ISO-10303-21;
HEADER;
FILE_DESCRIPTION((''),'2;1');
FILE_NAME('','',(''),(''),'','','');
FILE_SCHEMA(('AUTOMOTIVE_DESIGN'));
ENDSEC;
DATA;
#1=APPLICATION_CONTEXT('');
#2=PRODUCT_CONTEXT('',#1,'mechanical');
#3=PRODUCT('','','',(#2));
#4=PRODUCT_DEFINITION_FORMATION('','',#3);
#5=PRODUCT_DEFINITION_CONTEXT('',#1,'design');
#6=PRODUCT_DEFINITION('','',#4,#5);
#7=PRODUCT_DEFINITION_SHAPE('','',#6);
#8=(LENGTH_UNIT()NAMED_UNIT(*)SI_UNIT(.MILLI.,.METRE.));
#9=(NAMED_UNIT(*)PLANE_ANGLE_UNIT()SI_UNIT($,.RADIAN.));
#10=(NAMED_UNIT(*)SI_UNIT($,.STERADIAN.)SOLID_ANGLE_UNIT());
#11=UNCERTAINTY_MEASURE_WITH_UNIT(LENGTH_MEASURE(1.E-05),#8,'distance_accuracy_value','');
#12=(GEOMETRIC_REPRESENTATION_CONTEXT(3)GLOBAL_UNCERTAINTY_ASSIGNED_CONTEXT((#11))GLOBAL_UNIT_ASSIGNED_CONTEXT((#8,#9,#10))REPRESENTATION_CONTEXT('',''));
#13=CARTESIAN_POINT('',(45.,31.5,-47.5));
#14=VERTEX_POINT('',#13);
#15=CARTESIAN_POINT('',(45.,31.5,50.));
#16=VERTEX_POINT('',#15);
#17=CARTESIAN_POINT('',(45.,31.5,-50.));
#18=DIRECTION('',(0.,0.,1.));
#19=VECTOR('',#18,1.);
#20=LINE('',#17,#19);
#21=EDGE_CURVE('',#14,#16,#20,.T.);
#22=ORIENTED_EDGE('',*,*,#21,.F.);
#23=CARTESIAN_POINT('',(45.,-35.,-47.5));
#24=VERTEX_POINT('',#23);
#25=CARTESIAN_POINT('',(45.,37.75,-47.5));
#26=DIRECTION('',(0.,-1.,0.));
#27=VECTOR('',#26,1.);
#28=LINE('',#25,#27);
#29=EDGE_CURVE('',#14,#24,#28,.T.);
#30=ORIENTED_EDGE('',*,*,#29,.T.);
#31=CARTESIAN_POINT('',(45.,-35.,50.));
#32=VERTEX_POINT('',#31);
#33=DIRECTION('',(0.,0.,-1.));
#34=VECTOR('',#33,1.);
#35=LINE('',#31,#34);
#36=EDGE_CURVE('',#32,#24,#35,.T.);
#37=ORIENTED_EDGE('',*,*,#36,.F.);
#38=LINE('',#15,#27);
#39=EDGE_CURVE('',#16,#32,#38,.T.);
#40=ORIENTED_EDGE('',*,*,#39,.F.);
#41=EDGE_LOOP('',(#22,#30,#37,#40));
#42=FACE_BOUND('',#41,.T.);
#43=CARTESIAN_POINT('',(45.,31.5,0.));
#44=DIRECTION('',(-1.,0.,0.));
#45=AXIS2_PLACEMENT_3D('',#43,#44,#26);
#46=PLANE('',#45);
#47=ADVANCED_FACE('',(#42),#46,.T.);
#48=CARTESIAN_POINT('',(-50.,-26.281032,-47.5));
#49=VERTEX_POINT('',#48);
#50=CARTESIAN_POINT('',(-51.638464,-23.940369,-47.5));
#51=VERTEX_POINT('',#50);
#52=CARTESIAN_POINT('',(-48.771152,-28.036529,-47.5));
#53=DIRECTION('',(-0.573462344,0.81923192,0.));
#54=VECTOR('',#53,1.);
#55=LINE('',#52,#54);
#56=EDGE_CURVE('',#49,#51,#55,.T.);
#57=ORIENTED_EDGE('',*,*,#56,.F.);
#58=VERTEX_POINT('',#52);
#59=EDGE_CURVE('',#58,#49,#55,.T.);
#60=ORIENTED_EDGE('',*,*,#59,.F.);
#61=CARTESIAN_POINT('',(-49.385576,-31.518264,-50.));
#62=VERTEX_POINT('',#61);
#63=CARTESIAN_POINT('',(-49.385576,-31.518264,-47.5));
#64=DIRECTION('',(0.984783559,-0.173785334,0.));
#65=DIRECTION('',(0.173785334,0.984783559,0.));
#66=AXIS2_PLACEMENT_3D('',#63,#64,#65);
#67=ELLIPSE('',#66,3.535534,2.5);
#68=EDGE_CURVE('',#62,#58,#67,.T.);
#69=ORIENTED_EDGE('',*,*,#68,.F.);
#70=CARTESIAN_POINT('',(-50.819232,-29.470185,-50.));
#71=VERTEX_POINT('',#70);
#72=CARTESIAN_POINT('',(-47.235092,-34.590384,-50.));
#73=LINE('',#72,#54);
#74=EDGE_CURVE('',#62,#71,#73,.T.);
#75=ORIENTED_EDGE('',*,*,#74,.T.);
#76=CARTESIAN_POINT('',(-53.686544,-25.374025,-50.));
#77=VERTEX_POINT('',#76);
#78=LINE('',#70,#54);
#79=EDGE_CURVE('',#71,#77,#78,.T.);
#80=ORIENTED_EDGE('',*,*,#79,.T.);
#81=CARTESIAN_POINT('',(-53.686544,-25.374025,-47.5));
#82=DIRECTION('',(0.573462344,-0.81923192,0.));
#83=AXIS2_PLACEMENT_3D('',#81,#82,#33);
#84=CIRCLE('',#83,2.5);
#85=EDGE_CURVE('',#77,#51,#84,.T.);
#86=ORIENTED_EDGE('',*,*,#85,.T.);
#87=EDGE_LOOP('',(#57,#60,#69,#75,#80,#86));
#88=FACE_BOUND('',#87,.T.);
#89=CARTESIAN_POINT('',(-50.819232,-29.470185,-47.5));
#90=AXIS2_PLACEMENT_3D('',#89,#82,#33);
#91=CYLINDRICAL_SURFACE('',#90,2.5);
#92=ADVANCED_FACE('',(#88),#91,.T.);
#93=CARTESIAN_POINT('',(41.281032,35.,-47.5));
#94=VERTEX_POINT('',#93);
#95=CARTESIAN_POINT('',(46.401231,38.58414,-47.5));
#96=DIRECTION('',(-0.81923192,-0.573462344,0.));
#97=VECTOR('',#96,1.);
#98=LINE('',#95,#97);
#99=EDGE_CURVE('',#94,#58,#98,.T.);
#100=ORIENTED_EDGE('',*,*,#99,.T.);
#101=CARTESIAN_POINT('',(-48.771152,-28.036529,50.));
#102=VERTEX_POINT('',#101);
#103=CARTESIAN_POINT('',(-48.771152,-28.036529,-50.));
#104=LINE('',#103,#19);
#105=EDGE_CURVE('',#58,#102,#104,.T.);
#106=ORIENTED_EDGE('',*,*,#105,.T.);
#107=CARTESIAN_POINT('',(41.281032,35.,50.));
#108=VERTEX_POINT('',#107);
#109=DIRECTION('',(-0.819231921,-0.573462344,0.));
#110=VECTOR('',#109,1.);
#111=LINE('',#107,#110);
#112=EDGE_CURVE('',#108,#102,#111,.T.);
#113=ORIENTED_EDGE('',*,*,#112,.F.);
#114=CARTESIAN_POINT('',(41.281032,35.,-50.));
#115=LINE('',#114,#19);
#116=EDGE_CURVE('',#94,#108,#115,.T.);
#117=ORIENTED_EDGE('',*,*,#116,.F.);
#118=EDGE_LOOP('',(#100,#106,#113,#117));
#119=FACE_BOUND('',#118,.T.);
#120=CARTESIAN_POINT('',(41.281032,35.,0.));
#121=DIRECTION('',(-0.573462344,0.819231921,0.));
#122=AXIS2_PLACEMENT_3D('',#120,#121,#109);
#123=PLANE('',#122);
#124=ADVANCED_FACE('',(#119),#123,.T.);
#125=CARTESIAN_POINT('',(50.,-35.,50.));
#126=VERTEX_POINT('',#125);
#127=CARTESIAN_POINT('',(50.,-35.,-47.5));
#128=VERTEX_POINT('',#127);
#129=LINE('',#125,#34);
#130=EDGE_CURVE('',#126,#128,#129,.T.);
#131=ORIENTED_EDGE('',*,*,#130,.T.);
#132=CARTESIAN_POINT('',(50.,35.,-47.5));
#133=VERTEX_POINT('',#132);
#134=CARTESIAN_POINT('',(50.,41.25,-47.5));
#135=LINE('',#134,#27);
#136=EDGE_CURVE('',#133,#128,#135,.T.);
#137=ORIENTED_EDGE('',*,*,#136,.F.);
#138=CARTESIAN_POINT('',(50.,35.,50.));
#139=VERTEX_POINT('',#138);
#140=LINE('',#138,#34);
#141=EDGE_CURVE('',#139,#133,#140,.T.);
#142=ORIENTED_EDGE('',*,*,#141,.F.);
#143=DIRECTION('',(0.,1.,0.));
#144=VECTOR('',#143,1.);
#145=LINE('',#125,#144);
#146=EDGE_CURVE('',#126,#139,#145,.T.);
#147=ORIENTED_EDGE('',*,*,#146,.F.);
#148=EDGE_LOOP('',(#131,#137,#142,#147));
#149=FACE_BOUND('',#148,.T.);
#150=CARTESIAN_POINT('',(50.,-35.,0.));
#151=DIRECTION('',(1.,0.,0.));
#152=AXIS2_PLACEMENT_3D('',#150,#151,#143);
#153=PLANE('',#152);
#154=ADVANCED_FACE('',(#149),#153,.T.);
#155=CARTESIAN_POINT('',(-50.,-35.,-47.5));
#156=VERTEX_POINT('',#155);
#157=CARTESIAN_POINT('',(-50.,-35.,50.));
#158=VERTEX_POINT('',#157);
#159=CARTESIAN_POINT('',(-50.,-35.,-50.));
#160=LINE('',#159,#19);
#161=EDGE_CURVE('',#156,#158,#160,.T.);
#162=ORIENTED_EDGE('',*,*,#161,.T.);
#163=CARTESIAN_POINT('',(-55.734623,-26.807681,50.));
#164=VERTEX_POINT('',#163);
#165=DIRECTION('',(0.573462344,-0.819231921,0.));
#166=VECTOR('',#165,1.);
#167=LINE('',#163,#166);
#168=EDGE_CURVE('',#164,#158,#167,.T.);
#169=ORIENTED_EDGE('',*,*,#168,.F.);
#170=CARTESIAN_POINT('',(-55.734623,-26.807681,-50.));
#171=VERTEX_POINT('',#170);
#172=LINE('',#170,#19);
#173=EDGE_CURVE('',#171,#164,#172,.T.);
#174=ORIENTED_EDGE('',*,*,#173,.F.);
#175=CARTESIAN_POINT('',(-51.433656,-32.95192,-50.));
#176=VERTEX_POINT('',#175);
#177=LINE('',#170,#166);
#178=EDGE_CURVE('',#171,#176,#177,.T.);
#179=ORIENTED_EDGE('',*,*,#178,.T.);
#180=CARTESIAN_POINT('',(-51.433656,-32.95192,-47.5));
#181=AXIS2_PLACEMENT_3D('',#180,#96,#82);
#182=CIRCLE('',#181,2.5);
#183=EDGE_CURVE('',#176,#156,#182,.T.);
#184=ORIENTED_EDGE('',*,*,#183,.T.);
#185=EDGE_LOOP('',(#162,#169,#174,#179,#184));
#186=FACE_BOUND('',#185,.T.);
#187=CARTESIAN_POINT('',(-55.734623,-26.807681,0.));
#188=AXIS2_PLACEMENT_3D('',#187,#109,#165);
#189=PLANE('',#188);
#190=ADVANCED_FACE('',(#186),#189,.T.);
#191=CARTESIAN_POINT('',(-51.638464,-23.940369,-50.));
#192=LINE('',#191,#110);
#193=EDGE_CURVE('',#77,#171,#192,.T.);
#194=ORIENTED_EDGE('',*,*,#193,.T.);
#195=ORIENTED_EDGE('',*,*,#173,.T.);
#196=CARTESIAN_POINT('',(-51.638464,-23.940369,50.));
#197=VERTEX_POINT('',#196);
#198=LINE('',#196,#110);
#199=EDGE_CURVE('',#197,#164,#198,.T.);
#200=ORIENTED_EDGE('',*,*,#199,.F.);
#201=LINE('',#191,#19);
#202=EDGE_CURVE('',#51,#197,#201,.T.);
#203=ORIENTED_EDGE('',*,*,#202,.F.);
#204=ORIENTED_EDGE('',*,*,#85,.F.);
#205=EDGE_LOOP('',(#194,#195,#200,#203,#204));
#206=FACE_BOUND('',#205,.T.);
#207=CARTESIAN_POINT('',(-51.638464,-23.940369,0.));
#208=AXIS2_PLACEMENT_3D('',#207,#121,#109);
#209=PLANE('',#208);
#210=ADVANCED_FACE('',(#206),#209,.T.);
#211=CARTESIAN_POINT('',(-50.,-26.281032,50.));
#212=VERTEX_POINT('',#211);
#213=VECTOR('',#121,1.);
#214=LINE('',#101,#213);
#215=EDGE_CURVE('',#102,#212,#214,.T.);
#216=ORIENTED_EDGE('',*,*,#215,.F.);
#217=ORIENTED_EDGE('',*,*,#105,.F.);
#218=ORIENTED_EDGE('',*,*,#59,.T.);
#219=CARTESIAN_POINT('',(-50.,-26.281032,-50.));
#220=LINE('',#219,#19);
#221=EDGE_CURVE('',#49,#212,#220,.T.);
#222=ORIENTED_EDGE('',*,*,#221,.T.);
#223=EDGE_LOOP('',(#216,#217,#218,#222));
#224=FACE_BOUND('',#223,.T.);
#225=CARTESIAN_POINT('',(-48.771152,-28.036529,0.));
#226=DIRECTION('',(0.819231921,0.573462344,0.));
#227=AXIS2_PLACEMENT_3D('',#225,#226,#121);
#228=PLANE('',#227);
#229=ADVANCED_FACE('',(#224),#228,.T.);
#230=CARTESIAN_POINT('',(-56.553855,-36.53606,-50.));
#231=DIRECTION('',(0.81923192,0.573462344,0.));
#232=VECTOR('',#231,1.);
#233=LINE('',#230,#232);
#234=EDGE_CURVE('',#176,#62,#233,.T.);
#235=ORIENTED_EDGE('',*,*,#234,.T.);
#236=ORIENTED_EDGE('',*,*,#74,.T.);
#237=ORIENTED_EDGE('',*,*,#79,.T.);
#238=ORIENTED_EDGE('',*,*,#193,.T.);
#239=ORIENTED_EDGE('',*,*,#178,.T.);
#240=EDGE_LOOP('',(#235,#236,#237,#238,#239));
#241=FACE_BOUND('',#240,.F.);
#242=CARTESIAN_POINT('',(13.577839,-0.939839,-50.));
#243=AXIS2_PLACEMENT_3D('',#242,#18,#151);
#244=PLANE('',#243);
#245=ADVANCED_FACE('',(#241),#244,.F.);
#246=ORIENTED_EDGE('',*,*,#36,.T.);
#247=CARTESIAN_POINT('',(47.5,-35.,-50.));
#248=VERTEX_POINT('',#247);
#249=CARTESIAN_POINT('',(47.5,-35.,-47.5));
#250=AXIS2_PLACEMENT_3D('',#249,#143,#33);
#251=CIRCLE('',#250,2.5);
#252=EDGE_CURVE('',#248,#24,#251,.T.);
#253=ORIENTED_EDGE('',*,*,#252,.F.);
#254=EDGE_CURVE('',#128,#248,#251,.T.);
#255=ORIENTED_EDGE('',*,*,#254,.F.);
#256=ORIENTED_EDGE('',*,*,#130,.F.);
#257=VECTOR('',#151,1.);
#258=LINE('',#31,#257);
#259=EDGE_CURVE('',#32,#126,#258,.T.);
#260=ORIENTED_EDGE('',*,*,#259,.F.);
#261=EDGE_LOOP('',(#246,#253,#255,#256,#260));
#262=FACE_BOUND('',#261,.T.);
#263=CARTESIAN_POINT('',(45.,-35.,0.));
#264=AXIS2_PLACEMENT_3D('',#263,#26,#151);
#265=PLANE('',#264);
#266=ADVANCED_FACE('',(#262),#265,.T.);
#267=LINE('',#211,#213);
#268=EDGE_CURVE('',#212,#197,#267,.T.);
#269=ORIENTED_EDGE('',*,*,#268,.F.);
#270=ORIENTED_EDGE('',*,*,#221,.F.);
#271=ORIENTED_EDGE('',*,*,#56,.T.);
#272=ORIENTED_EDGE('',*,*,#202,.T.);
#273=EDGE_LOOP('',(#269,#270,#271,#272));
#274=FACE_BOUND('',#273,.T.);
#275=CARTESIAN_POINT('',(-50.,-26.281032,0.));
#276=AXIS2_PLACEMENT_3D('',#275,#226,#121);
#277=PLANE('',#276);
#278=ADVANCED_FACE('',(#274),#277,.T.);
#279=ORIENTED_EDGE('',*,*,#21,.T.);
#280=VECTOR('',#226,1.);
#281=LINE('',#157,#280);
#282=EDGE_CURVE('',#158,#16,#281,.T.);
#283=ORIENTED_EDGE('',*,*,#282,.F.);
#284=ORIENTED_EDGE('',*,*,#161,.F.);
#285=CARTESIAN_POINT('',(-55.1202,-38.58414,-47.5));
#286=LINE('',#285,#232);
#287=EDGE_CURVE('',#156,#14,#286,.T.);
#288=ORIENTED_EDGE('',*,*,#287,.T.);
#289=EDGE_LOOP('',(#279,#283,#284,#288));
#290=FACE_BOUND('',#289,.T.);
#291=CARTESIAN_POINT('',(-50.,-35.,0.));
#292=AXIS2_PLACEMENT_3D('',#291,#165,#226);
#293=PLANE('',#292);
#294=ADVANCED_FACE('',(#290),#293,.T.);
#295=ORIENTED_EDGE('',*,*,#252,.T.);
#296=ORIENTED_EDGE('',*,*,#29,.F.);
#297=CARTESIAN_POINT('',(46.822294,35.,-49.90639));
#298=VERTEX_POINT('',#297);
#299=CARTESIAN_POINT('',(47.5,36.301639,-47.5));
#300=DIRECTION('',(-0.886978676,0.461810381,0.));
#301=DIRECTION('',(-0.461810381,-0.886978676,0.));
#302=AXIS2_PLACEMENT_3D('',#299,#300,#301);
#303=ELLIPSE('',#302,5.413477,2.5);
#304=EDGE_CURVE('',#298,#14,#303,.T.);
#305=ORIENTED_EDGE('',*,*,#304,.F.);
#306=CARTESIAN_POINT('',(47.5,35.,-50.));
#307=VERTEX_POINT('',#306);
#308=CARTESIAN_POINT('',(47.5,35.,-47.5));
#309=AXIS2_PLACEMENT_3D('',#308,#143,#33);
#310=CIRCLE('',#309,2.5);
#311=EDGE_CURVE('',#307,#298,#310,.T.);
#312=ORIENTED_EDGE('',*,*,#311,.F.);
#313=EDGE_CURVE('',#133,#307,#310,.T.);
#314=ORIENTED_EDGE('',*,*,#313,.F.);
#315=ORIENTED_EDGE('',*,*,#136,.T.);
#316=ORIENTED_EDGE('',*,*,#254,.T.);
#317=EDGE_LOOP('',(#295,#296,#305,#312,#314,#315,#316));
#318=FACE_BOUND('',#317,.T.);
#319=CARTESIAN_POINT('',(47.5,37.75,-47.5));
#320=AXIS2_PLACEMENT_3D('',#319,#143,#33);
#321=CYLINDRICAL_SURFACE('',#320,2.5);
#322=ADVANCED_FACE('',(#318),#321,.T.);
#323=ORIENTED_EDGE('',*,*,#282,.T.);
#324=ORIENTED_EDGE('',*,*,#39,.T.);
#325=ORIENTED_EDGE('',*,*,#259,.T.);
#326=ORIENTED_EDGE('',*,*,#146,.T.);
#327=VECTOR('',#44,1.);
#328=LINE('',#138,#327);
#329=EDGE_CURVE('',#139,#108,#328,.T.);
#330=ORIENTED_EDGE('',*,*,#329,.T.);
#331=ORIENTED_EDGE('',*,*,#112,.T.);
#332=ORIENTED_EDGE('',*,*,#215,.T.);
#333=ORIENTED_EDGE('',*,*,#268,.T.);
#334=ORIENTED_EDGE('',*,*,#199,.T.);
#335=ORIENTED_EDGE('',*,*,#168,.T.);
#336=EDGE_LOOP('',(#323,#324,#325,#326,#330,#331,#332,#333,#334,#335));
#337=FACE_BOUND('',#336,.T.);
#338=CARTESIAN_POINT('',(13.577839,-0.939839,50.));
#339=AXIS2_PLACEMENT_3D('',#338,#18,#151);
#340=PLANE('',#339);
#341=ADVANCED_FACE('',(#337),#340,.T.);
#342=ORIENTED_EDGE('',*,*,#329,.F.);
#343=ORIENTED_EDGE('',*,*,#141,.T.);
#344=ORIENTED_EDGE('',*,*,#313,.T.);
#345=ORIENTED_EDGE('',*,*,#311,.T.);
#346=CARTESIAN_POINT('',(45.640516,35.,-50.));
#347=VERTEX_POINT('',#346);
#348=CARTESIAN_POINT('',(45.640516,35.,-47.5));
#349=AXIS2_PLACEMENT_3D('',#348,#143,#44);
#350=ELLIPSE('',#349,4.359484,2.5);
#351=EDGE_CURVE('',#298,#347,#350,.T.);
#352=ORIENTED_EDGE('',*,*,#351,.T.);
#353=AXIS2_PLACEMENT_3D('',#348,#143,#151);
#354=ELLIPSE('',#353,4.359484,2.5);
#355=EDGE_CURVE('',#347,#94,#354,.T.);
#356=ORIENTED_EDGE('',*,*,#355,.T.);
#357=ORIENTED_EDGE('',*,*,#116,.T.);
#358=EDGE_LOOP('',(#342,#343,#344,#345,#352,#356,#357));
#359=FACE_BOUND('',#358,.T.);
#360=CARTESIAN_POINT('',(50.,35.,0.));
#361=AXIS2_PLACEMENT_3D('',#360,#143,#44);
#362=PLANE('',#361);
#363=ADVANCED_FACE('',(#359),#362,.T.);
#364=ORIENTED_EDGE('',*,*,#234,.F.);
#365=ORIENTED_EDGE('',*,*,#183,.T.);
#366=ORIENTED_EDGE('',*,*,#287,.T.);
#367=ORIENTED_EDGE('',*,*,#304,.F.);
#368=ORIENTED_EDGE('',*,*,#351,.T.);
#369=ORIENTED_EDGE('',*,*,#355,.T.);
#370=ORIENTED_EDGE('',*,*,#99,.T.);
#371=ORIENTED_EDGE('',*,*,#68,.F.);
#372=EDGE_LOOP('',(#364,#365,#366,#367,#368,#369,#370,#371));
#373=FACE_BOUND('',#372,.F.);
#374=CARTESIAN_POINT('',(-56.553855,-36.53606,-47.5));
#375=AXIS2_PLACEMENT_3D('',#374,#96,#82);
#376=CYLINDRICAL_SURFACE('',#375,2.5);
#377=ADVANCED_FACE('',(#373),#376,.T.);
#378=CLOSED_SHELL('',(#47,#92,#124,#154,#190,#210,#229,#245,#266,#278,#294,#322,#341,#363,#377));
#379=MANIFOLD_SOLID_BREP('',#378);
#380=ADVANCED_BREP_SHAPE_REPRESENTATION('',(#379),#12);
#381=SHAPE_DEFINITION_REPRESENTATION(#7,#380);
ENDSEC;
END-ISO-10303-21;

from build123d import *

# Parameters (mm, degrees)
F1_DEPTH      = 50
F1_DEPTH_BACK = 50
F2_T1_DEPTH   = 82.5
F2_T3_DEPTH   = 116.1726990145
F2_T5_DEPTH   = 11.25
F2_T10_DEPTH  = 79
F2_T15_DEPTH  = 128.4622783495
F2_T21_DEPTH  = 128.4622783495
F2_T25_DEPTH  = 79
F2_T32_DEPTH  = 122.4226990145
F2_T36_DEPTH  = 17.5


# Not quite as in the source:
# - a fillet or chamfer that OpenCascade refuses, or shapes differently, is made with other operations: its cross-section is extruded or revolved along the edge and cut away or added


with BuildPart() as f1:
    # F0 (on Top) → F1 (new body, two sides)
    with BuildSketch(Plane.XY) as f1_sk:
        Polygon((50, 35), (41.281031703, 35), (-48.7711521192, -28.0365286756), (-50, -26.281031703), (-51.638463841, -23.940369073), (-55.7346234436, -26.8076807948), (-52.8673117218, -30.9038403974), (-50, -35), (45, 31.5), (45, -35), (50, -35), align=None)
    extrude(amount=F1_DEPTH)
    extrude(f1_sk.sketch, amount=-F1_DEPTH_BACK)

    # F2: fillet of radius 2.5 on 5 edges, made by hand

    # F2_s2 → F2_t1 (cut)
    with BuildSketch(Plane.XZ.offset(-41.25)):
        with BuildLine():
            ThreePointArc((47.5, -50), (49.267766953, -49.267766953), (50, -47.5))
            Line((50, -47.5), (50, -50))
            Line((50, -50), (47.5, -50))
        make_face()
    extrude(amount=F2_T1_DEPTH, mode=Mode.SUBTRACT)

    # F2_s4 → F2_t3 (cut)
    with BuildSketch(Plane(origin=(49.2685429281, 34.4879800497, 0), x_dir=(0, 0, 1), z_dir=(-0.8192319205, -0.5734623444, 0))):
        with BuildLine():
            ThreePointArc((-50, 2.5), (-49.267766953, 4.267766953), (-47.5, 5))
            Line((-47.5, 5), (-50, 5))
            Line((-50, 5), (-50, 2.5))
        make_face()
    extrude(amount=F2_T3_DEPTH, mode=Mode.SUBTRACT)

    # F2_s6 → F2_t5 (cut)
    with BuildSketch(Plane(origin=(-2.8673117218, 4.0961596026, 0), x_dir=(0, 0, 1), z_dir=(-0.5734623444, 0.8192319205, 0))):
        with BuildLine():
            ThreePointArc((-50, -58.5327780787), (-49.267766953, -56.7650111257), (-47.5, -56.0327780787))
            Line((-47.5, -56.0327780787), (-50, -56.0327780787))
            Line((-50, -56.0327780787), (-50, -58.5327780787))
        make_face()
    extrude(amount=F2_T5_DEPTH, mode=Mode.SUBTRACT)


with BuildPart() as f2_tool8:
    # F2_s9 → F2_t10 (new body)
    with BuildSketch(Plane.XZ.offset(-37.75)):
        with BuildLine():
            ThreePointArc((47.5, -50), (45.732233047, -49.267766953), (45, -47.5))
            Line((45, -47.5), (45, -50))
            Line((45, -50), (47.5, -50))
        make_face()
    extrude(amount=F2_T10_DEPTH)

    split(bisect_by=Plane(origin=(0, 0, 0), x_dir=(0, 0, 1), z_dir=(0.5734623444, -0.8192319205, 0)), keep=Keep.TOP)


with BuildPart() as f1_1:
    add(f1.part)

    # F2_t7: cut F2_tool8
    add(f2_tool8.part, mode=Mode.SUBTRACT)


with BuildPart() as f2_tool13:
    # F2_s14 → F2_t15 (new body)
    with BuildSketch(Plane(origin=(-55.1201995032, -38.5841396523, 0), x_dir=(0, 0, 1), z_dir=(0.8192319205, 0.5734623444, 0))):
        with BuildLine():
            ThreePointArc((-47.5, 0), (-49.267766953, -0.732233047), (-50, -2.5))
            Line((-50, -2.5), (-50, 0))
            Line((-50, 0), (-47.5, 0))
        make_face()
    extrude(amount=F2_T15_DEPTH)

    split(bisect_by=Plane.YZ.offset(45), keep=Keep.BOTTOM)


with BuildPart() as f1_2:
    add(f1_1.part)

    # F2_t12: cut F2_tool13
    add(f2_tool13.part, mode=Mode.SUBTRACT)


with BuildPart() as f2_tool19:
    # F2_s20 → F2_t21 (new body)
    with BuildSketch(Plane(origin=(-55.1201995032, -38.5841396523, 0), x_dir=(0, 0, 1), z_dir=(0.8192319205, 0.5734623444, 0))):
        with BuildLine():
            ThreePointArc((-47.5, 0), (-49.267766953, -0.732233047), (-50, -2.5))
            Line((-50, -2.5), (-50, 0))
            Line((-50, 0), (-47.5, 0))
        make_face()
    extrude(amount=F2_T21_DEPTH)

    split(bisect_by=Plane.YZ.offset(45), keep=Keep.TOP)


with BuildPart() as f2_tool23:
    # F2_s24 → F2_t25 (new body)
    with BuildSketch(Plane.XZ.offset(-37.75)):
        with BuildLine():
            ThreePointArc((47.5, -50), (45.732233047, -49.267766953), (45, -47.5))
            Line((45, -47.5), (45, -50))
            Line((45, -50), (47.5, -50))
        make_face()
    extrude(amount=F2_T25_DEPTH)

    split(bisect_by=Plane(origin=(0, 0, 0), x_dir=(0, 0, 1), z_dir=(-0.5734623444, 0.8192319205, 0)), keep=Keep.TOP)


with BuildPart() as f2_tool19_1:
    add(f2_tool19.part)

    # F2_t27: intersect F2_tool23
    add(f2_tool23.part, mode=Mode.INTERSECT)


with BuildPart() as f1_3:
    add(f1_2.part)

    # F2_t17: cut F2_tool19
    add(f2_tool19_1.part, mode=Mode.SUBTRACT)


with BuildPart() as f2_tool30:
    # F2_s31 → F2_t32 (new body)
    with BuildSketch(Plane(origin=(49.2685429281, 34.4879800497, 0), x_dir=(0, 0, 1), z_dir=(-0.8192319205, -0.5734623444, 0))):
        with BuildLine():
            ThreePointArc((-50, 2.5), (-49.267766953, 4.267766953), (-47.5, 5))
            Line((-47.5, 5), (-50, 5))
            Line((-50, 5), (-50, 2.5))
        make_face()
    extrude(amount=F2_T32_DEPTH)

    split(bisect_by=Plane(origin=(-45.9038403974, -32.1326882782, 0), x_dir=(0, 0, 1), z_dir=(-0.8192319205, -0.5734623444, 0)), keep=Keep.TOP)


with BuildPart() as f2_tool34:
    # F2_s35 → F2_t36 (new body)
    with BuildSketch(Plane(origin=(0.7168279305, -1.0240399006, 0), x_dir=(0, 0, 1), z_dir=(-0.5734623444, 0.8192319205, 0))):
        with BuildLine():
            ThreePointArc((-50, -58.5327780787), (-49.267766953, -56.7650111257), (-47.5, -56.0327780787))
            Line((-47.5, -56.0327780787), (-50, -56.0327780787))
            Line((-50, -56.0327780787), (-50, -58.5327780787))
        make_face()
    extrude(amount=F2_T36_DEPTH)

    split(bisect_by=Plane(origin=(-2.8673117218, 4.0961596026, 0), x_dir=(0, 0, 1), z_dir=(0.5734623444, -0.8192319205, 0)), keep=Keep.TOP)


with BuildPart() as f2_tool30_1:
    add(f2_tool30.part)

    # F2_t38: intersect F2_tool34
    add(f2_tool34.part, mode=Mode.INTERSECT)


with BuildPart() as f1_4:
    add(f1_3.part)

    # F2_t28: cut F2_tool30
    add(f2_tool30_1.part, mode=Mode.SUBTRACT)


solid = f1_4.part
